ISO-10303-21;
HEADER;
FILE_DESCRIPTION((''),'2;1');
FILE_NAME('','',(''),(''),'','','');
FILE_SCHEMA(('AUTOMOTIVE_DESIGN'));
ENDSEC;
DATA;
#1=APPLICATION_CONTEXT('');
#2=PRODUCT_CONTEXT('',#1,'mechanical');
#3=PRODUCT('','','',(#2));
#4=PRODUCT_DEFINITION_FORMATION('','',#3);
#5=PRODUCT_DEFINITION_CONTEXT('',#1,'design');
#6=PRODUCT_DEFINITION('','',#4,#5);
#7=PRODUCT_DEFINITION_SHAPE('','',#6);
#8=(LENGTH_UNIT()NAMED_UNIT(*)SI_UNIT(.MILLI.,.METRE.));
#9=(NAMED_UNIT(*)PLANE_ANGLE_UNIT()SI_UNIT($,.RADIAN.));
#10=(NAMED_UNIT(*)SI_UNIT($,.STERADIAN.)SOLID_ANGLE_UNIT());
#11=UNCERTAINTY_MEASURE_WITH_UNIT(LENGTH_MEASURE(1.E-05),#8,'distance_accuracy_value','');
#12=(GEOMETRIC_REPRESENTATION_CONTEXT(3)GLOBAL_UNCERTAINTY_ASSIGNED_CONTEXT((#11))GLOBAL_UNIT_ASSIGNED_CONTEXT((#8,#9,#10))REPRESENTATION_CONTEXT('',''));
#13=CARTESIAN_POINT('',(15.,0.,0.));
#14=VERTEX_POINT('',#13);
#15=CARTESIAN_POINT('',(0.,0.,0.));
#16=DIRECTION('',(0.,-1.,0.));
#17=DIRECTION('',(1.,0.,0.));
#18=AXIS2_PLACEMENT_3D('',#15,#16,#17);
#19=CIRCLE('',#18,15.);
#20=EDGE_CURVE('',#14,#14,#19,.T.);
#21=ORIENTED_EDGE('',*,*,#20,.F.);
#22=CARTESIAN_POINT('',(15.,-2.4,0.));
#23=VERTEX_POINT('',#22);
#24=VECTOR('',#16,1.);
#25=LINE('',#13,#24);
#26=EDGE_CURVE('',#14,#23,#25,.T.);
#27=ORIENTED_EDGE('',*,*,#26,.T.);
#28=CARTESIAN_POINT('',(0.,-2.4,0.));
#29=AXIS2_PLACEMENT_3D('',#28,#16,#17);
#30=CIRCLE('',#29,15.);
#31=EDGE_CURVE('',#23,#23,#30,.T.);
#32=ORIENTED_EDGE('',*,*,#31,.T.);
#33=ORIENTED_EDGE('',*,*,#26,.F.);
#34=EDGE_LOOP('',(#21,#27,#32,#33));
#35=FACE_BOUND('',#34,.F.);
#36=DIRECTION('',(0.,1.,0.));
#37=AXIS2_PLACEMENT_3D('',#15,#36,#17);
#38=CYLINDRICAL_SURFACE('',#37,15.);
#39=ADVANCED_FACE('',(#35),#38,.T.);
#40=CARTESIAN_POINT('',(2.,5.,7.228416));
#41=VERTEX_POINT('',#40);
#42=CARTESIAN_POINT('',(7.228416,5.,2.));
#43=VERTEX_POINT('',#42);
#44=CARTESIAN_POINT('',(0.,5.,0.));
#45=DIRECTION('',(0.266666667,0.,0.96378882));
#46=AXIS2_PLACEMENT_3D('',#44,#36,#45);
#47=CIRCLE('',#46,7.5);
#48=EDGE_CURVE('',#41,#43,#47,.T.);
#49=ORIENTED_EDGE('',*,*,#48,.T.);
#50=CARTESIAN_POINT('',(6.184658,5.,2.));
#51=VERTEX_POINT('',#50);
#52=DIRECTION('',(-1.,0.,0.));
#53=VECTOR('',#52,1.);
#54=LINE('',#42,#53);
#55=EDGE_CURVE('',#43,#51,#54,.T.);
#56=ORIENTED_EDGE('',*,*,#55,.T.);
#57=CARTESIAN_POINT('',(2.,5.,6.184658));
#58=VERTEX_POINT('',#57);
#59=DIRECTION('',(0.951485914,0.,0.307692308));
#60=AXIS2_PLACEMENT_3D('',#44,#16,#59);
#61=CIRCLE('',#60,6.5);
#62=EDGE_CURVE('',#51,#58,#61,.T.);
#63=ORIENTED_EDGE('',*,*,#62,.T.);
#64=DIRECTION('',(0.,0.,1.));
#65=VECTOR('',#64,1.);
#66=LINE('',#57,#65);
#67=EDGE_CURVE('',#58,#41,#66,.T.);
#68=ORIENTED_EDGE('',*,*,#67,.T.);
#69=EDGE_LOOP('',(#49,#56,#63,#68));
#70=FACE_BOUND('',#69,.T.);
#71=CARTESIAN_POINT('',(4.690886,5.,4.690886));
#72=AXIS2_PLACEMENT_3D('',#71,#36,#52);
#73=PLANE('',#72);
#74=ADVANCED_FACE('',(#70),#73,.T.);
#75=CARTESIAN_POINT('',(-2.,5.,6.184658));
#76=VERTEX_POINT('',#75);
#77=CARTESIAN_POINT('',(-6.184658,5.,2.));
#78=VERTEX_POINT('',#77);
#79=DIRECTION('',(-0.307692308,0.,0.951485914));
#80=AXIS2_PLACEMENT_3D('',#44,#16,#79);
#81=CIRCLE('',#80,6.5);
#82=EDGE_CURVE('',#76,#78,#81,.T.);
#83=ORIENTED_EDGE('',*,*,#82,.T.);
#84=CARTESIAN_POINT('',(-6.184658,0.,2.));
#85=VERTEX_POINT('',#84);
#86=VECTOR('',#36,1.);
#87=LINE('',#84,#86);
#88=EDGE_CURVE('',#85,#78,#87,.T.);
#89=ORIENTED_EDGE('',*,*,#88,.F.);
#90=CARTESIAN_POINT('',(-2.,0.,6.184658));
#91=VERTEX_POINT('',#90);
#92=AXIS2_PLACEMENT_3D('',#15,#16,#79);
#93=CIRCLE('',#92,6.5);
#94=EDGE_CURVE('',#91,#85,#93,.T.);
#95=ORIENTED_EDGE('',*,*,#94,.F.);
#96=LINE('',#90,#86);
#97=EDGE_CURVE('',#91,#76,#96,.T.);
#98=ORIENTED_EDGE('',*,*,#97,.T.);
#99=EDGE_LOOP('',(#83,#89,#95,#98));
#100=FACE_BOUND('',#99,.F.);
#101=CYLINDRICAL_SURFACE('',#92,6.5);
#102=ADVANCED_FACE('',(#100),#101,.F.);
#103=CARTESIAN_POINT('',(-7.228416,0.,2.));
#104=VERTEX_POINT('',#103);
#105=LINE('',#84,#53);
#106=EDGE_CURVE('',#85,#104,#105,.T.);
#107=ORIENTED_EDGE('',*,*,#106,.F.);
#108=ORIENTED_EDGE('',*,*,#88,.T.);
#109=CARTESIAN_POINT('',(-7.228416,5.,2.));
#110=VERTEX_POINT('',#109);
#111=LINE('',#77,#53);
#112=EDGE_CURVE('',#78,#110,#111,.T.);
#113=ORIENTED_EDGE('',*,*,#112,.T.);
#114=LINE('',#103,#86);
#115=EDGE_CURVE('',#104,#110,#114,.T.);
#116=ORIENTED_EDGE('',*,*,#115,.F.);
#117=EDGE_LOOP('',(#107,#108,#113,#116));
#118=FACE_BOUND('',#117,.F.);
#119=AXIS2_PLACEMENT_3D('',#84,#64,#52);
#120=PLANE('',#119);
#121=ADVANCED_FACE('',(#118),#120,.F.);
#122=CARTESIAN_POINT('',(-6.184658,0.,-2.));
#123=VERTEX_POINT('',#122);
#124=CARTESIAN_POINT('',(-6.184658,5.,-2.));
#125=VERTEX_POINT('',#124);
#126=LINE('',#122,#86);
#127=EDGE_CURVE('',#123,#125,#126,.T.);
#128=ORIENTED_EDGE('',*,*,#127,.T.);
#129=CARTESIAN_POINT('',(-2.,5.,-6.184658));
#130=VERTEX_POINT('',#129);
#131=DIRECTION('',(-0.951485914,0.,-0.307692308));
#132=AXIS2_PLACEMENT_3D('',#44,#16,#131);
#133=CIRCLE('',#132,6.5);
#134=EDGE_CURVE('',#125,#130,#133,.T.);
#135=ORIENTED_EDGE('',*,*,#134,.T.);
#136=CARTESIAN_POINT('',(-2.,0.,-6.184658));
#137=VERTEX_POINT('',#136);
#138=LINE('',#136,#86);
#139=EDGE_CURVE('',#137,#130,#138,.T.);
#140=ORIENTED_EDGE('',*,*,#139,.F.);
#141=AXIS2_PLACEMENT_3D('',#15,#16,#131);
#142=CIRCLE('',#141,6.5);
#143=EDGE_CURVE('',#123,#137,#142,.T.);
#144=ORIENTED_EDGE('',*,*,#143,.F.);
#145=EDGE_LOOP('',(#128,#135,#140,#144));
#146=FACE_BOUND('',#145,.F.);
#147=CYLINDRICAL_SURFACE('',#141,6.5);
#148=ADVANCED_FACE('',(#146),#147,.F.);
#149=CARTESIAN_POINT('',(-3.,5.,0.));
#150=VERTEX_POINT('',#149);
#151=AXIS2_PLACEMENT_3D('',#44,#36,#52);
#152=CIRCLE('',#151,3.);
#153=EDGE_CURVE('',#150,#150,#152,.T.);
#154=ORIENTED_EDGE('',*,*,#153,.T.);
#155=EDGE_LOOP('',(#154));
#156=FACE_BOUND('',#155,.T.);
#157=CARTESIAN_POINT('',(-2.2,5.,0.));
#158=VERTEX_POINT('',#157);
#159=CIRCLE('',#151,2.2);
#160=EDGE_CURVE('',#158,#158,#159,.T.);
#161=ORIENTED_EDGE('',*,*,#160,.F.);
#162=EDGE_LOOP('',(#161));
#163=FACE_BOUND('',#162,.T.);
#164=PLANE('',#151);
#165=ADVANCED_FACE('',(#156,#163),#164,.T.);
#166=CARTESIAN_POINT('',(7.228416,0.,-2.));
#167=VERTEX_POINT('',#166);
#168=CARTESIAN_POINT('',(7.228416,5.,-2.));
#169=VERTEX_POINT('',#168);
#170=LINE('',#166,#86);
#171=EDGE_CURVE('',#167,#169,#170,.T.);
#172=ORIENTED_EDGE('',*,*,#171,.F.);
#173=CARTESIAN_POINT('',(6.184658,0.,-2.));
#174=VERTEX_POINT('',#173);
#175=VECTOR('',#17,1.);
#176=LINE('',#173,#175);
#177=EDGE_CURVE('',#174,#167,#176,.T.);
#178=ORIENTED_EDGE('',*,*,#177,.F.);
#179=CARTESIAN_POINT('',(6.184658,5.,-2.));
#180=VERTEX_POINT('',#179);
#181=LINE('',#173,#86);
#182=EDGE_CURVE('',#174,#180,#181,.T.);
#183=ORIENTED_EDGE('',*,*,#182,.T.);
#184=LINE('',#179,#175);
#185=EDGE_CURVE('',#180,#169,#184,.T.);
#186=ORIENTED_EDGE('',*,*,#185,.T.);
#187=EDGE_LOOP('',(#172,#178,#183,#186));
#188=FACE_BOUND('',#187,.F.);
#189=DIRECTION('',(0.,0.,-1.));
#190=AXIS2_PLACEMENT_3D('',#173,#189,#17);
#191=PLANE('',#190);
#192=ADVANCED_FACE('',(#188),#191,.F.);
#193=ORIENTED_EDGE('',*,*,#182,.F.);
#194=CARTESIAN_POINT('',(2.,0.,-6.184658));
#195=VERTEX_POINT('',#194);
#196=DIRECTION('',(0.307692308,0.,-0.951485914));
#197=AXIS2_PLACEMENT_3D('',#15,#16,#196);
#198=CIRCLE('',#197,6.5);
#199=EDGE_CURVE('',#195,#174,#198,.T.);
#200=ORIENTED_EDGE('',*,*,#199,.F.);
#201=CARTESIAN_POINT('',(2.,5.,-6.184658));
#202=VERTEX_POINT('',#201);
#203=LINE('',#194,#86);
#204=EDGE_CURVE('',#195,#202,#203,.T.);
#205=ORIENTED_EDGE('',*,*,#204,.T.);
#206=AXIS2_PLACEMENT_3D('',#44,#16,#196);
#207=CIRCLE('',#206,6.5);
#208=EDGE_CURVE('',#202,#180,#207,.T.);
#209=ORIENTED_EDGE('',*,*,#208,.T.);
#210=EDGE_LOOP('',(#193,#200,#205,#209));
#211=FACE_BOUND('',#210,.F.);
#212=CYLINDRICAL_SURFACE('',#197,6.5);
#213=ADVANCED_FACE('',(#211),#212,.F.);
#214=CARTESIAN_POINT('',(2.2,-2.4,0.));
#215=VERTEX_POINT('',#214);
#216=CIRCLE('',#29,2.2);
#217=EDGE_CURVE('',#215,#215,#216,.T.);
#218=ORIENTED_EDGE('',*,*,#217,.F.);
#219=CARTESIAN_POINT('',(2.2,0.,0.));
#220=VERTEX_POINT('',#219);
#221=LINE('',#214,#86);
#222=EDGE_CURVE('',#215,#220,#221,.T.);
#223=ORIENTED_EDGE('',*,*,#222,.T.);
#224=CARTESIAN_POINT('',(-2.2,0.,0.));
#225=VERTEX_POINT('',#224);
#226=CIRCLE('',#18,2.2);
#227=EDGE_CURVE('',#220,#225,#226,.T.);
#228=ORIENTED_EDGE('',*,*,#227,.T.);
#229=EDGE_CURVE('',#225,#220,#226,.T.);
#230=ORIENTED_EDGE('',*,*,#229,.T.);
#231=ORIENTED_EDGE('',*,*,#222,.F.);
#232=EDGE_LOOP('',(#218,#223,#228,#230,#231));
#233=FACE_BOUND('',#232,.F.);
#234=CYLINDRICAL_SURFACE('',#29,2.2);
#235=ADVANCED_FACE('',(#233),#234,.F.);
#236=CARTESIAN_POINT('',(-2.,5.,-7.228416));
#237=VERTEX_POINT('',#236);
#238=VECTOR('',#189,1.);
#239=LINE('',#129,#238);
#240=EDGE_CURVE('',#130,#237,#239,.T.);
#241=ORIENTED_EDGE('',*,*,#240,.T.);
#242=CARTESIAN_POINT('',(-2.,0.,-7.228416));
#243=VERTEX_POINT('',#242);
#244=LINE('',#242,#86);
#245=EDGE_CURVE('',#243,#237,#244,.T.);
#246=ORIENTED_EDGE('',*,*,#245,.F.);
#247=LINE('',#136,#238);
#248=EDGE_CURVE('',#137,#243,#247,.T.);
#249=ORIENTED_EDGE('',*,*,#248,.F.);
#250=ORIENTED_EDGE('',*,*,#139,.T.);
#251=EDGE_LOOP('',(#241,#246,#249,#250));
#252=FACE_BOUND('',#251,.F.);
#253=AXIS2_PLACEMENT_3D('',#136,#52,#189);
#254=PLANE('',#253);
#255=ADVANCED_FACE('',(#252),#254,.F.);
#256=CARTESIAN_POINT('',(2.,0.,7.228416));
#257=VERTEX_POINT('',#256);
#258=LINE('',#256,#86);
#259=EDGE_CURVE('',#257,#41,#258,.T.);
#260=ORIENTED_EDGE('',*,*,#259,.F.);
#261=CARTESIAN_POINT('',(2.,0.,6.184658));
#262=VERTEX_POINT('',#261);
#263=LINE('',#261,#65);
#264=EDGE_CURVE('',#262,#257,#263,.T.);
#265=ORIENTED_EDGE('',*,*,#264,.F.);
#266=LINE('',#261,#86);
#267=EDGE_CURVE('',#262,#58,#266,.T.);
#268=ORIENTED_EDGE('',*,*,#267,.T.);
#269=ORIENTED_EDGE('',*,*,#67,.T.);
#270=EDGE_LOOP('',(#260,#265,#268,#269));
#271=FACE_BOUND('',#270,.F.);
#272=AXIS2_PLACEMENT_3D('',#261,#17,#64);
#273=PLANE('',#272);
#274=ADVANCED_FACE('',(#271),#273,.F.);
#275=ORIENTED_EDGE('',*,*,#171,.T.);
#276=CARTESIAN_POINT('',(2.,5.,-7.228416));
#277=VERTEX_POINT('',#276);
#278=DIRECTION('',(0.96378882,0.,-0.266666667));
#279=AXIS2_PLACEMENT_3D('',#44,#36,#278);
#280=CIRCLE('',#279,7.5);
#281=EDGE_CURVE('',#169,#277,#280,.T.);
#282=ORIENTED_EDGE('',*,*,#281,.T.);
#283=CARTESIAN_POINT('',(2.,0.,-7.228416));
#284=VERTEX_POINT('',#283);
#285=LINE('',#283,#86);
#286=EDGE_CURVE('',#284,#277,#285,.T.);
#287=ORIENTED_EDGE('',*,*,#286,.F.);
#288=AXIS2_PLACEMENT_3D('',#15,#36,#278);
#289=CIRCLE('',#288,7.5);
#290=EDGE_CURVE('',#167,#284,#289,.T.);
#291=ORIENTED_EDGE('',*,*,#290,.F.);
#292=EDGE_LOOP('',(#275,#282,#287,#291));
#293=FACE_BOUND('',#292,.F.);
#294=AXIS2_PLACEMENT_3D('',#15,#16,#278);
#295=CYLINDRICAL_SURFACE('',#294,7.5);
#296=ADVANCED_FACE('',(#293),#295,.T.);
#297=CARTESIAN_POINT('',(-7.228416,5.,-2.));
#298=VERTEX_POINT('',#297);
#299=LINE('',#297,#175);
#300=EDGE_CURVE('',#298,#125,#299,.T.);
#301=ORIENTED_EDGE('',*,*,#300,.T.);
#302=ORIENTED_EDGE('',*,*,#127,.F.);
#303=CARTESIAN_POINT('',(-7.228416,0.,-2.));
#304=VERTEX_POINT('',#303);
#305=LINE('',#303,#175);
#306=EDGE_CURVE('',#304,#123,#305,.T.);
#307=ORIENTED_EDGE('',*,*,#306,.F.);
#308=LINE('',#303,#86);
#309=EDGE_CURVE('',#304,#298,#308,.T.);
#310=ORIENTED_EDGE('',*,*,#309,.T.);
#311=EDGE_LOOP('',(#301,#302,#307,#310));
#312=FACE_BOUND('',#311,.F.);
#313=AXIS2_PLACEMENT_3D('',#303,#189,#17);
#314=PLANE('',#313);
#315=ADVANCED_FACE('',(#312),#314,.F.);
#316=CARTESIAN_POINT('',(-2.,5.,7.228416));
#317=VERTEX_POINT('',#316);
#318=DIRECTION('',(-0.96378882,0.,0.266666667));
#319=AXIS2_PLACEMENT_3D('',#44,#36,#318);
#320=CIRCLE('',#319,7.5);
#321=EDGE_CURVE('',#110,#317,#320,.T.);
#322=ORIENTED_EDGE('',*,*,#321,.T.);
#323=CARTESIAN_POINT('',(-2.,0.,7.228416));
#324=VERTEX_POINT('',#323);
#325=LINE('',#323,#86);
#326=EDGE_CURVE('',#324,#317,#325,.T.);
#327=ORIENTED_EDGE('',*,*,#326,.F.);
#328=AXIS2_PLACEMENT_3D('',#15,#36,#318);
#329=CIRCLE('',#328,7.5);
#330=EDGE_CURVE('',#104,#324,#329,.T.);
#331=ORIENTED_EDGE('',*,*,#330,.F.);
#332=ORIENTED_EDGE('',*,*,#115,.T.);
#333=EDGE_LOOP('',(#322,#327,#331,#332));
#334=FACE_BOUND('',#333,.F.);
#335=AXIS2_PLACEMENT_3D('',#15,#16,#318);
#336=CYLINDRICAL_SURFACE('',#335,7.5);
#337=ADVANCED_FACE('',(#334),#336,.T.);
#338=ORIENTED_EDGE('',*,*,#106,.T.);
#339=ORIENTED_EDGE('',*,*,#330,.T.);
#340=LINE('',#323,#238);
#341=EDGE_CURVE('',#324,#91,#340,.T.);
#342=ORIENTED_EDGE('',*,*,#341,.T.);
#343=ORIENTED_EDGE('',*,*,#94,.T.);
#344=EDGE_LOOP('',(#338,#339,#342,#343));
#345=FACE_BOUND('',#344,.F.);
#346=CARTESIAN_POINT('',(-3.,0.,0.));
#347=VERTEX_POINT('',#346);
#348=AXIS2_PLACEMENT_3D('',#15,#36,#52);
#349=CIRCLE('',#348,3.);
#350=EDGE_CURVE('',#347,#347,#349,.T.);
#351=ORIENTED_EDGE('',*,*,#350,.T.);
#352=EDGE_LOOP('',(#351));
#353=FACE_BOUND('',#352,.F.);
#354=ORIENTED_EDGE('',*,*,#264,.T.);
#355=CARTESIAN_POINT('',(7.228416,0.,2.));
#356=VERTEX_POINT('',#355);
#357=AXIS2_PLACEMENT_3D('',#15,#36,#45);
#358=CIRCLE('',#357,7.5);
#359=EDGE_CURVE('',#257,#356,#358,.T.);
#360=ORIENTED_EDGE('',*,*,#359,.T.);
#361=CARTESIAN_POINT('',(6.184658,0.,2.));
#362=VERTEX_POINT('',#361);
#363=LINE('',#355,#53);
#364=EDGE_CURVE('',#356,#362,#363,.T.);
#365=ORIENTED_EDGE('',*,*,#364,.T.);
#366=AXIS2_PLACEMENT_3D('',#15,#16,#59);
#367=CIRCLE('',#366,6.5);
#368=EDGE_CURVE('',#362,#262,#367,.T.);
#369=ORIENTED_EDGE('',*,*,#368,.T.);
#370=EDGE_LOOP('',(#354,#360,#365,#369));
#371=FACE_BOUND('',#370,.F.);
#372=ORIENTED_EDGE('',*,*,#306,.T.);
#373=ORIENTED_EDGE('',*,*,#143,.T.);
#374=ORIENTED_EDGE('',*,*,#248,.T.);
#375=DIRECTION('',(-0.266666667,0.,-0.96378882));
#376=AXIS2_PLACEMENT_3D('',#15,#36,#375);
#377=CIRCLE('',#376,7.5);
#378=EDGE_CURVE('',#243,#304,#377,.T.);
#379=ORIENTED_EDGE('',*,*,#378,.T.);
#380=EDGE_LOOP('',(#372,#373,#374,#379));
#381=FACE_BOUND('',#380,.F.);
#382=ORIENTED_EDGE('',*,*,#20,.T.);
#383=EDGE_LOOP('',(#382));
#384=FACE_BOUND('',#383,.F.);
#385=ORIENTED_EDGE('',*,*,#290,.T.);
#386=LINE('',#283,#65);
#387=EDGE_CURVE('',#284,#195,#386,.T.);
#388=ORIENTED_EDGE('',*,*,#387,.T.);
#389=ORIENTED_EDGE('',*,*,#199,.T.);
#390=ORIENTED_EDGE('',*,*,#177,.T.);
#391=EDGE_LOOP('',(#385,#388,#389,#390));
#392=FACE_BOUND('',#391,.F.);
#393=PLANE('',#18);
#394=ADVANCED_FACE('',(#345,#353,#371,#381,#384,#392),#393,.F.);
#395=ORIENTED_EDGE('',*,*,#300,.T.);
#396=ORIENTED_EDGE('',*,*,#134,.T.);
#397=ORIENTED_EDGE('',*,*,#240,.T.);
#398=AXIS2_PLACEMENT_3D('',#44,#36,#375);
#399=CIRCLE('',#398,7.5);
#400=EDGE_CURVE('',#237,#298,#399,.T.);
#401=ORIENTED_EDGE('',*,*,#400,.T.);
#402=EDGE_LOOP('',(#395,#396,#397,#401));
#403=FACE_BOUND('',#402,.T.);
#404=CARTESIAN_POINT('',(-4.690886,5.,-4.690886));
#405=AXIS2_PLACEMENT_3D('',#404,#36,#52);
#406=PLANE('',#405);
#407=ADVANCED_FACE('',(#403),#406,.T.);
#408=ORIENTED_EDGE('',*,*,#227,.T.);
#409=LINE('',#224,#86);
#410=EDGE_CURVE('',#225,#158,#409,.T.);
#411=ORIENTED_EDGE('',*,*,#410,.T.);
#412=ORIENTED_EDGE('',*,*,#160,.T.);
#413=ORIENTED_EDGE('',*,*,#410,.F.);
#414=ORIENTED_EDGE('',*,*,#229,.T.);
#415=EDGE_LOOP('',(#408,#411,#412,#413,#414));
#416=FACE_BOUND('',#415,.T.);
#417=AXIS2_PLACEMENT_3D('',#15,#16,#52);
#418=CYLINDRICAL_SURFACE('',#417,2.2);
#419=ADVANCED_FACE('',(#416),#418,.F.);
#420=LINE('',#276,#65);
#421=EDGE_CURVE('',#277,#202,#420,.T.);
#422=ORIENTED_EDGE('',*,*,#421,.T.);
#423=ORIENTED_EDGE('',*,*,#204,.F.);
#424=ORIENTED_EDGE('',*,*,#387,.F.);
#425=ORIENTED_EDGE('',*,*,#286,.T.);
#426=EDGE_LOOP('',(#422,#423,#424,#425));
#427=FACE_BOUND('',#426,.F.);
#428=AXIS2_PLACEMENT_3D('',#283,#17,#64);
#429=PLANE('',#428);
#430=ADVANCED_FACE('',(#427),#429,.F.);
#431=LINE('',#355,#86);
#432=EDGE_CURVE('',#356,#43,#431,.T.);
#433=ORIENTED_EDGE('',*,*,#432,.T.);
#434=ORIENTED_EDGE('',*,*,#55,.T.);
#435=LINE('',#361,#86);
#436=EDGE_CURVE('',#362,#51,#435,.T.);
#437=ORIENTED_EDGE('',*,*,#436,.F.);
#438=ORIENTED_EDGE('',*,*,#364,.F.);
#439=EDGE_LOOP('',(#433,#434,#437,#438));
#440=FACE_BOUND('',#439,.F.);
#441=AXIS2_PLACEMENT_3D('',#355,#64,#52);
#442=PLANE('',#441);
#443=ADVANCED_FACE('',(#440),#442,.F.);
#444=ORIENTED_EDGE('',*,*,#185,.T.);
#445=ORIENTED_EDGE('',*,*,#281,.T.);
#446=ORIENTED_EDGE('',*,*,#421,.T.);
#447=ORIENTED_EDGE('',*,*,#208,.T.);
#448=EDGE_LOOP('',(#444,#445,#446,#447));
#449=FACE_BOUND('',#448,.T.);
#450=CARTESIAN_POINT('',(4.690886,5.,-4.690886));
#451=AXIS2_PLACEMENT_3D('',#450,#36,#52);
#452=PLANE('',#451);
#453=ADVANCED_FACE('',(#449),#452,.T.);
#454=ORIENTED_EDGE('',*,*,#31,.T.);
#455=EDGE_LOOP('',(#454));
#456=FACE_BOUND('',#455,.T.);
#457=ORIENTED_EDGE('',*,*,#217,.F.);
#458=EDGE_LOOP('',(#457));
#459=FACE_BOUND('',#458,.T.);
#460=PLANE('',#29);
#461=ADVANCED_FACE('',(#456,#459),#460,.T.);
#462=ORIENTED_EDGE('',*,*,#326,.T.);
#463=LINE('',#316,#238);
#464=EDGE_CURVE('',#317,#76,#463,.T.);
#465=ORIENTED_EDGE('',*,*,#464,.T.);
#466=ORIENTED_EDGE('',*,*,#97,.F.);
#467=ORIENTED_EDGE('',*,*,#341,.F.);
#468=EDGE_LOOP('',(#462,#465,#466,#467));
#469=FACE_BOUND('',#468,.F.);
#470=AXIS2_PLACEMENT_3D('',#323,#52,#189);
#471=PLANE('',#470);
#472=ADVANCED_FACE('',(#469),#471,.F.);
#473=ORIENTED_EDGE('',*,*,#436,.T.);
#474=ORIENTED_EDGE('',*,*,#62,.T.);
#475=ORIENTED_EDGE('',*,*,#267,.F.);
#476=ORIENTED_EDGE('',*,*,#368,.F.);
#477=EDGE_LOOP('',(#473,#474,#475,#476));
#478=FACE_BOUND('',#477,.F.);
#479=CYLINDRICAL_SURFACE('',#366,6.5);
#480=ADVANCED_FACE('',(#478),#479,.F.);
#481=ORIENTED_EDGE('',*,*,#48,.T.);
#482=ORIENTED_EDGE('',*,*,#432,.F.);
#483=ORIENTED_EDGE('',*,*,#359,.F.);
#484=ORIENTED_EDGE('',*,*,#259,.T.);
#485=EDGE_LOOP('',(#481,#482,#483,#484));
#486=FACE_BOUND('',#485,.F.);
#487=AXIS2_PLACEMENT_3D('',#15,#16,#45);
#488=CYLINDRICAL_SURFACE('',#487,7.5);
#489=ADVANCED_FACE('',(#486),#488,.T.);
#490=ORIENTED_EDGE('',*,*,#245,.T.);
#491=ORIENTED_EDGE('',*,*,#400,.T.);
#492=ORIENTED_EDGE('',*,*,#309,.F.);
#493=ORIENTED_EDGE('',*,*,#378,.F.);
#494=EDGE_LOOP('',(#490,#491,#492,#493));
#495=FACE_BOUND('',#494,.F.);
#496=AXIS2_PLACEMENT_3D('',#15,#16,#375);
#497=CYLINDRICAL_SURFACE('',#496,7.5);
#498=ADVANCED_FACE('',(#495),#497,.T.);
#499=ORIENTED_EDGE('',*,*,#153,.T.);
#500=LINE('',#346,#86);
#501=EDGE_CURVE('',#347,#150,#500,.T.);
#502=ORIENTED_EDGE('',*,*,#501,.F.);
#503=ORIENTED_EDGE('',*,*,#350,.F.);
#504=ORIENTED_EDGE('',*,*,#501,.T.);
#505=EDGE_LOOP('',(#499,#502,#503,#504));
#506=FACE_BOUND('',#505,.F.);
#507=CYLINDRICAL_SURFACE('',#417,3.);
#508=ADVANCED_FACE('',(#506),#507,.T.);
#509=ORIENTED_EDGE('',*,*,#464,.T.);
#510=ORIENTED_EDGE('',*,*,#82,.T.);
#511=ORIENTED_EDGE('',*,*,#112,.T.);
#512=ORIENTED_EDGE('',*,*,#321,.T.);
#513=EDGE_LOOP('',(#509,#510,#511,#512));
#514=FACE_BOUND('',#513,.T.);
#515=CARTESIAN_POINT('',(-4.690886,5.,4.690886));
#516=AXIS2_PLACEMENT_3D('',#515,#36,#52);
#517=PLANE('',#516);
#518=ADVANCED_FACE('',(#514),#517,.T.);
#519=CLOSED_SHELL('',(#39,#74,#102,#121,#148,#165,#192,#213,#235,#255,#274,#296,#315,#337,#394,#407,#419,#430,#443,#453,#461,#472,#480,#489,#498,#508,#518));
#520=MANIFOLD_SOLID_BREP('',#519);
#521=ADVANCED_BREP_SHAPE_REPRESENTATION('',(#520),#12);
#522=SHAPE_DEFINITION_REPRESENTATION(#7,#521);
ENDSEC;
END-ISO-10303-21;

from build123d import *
from build123d import SkipClean  # not in build123d's __all__

# Parameters (mm, degrees)
F0_R     = 15
F1_DEPTH = 2.4
F2_R     = 2.2
F3_DEPTH = 2.401
F4_R     = 3
F4_R_2   = 2.2
F5_DEPTH = 5


with BuildPart() as f1:
    # F0 (on Front) → F1 (new body)
    with BuildSketch(Plane.XZ):
        Circle(F0_R)
    extrude(amount=F1_DEPTH)

    # F2 (on face) → F3 (cut, through all)
    with BuildSketch(Plane.XZ.offset(2.4)):
        Circle(F2_R)
    extrude(amount=-F3_DEPTH, mode=Mode.SUBTRACT)

    # F4 (on face) → F5 (join)
    with BuildSketch(Plane(origin=(0, 0, 0), x_dir=(-1, 0, 0), z_dir=(0, 1, 0))):
        Circle(F4_R)
        Circle(F4_R_2, mode=Mode.SUBTRACT)
        with BuildLine():
            ThreePointArc((-2, 7.2284161474), (-5.3033008589, 5.3033008589), (-7.2284161474, 2))
            Line((-7.2284161474, 2), (-6.1846584384, 2))
            ThreePointArc((-6.1846584384, 2), (-4.5961940777, 4.5961940777), (-2, 6.1846584384))
            Line((-2, 6.1846584384), (-2, 7.2284161474))
        make_face()
        with BuildLine():
            Line((-2, -7.2284161474), (-2, -6.1846584384))
            ThreePointArc((-2, -6.1846584384), (-4.5961940777, -4.5961940777), (-6.1846584384, -2))
            Line((-6.1846584384, -2), (-7.2284161474, -2))
            ThreePointArc((-7.2284161474, -2), (-5.3033008589, -5.3033008589), (-2, -7.2284161474))
        make_face()
        with BuildLine():
            Line((2, 7.2284161474), (2, 6.1846584384))
            ThreePointArc((2, 6.1846584384), (4.5961940777, 4.5961940777), (6.1846584384, 2))
            Line((6.1846584384, 2), (7.2284161474, 2))
            ThreePointArc((7.2284161474, 2), (5.3033008589, 5.3033008589), (2, 7.2284161474))
        make_face()
        with BuildLine():
            ThreePointArc((6.1846584384, -2), (4.5961940777, -4.5961940777), (2, -6.1846584384))
            Line((2, -6.1846584384), (2, -7.2284161474))
            ThreePointArc((2, -7.2284161474), (5.3033008589, -5.3033008589), (7.2284161474, -2))
            Line((7.2284161474, -2), (6.1846584384, -2))
        make_face()
    with SkipClean():  # cleaning this boolean's faces spoils the solid; the shape is the same uncleaned
        extrude(amount=F5_DEPTH)


solid = f1.part
